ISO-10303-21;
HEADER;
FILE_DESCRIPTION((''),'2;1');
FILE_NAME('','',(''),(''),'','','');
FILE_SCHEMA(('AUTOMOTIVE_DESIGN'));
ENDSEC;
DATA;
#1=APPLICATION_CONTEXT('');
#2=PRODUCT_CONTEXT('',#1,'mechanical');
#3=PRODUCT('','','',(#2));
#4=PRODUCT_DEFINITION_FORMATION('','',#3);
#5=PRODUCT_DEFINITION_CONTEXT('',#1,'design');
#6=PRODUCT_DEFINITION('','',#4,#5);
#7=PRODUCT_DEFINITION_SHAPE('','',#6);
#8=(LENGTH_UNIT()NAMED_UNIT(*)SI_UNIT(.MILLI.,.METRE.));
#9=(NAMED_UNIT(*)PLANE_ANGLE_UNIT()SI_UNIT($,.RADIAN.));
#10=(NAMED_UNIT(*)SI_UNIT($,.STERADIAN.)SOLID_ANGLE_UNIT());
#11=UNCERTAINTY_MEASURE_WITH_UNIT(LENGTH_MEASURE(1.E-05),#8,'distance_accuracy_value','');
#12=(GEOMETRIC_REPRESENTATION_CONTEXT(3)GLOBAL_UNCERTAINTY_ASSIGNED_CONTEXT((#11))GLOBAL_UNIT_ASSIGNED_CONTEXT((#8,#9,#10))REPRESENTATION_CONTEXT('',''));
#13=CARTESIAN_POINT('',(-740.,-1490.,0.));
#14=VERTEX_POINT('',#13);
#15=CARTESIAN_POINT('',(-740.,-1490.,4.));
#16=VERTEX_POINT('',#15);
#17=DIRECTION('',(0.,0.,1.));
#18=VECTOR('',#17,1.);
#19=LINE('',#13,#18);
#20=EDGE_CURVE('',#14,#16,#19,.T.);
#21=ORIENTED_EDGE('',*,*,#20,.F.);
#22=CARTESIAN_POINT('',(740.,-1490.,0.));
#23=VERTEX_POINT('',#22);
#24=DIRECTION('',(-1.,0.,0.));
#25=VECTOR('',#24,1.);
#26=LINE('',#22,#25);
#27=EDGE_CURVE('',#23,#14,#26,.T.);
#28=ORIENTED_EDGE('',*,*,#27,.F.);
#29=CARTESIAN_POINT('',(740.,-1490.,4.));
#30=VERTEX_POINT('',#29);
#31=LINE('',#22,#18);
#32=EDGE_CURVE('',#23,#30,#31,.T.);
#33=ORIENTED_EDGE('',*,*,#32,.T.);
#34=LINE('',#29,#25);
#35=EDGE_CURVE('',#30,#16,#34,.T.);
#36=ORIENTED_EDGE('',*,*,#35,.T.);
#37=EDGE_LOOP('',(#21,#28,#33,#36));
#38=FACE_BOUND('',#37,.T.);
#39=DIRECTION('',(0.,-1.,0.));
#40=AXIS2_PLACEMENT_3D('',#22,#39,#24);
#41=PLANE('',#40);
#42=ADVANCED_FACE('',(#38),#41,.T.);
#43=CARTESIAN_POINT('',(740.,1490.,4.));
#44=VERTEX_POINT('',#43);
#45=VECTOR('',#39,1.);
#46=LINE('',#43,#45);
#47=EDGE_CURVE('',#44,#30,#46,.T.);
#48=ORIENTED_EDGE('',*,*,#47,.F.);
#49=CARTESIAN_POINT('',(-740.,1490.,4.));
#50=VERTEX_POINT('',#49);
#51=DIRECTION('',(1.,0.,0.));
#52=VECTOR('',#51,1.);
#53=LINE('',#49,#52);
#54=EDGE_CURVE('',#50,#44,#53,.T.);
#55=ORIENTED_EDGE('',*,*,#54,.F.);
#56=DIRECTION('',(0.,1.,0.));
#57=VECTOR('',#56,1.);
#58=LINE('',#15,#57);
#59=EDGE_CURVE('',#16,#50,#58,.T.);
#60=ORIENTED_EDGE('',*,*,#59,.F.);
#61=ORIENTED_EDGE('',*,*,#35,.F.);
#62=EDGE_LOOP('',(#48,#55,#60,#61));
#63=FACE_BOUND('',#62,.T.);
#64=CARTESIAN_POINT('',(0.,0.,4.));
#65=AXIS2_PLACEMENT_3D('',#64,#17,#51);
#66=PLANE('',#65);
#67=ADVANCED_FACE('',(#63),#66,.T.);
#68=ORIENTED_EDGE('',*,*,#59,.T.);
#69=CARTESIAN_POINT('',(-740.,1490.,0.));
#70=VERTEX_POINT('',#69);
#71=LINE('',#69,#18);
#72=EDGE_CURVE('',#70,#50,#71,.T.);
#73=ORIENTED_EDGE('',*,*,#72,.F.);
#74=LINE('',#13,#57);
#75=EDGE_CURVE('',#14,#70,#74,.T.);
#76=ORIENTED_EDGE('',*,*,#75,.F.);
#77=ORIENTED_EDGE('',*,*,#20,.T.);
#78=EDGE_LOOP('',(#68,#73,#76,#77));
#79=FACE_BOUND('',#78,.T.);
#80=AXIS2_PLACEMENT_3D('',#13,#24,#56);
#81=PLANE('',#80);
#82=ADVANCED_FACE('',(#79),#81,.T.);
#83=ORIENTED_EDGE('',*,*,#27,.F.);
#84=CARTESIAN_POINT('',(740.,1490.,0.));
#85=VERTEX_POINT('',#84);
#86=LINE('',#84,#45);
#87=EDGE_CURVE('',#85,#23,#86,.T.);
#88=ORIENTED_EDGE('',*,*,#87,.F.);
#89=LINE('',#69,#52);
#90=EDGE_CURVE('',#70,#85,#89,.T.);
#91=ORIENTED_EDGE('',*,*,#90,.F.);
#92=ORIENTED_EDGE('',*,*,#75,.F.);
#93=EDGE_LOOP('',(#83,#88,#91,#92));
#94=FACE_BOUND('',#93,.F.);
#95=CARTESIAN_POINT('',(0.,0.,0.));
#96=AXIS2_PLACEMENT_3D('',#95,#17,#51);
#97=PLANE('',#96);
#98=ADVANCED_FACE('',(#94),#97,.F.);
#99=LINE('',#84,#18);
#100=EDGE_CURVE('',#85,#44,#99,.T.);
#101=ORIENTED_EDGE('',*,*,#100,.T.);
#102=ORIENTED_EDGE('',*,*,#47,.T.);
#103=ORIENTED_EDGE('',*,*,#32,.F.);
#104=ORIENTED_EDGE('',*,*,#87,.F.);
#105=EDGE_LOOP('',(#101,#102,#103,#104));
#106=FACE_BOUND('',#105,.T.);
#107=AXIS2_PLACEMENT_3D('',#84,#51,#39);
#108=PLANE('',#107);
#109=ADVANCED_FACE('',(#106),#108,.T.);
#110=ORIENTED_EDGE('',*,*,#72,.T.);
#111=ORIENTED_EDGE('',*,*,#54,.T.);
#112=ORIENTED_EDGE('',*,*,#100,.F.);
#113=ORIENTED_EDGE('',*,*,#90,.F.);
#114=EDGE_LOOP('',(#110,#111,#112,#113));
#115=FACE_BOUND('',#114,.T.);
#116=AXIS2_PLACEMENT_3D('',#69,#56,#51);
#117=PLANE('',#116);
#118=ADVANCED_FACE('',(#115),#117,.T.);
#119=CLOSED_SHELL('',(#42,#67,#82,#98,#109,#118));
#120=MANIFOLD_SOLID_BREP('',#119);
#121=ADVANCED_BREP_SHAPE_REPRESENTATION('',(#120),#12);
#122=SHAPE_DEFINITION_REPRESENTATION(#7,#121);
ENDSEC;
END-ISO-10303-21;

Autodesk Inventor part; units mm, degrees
ref_plane "YZ Plane" through (0, 0, 0) normal (1, 0, 0) x (0, 1, 0)
ref_plane "XZ Plane" through (0, 0, 0) normal (0, 1, 0) x (-1, 0, 0)
ref_plane "XY Plane" through (0, 0, 0) normal (0, 0, 1) x (1, 0, 0)
sketch "Sketch1" plane through (0, 0, 0) normal (0, 0, 1) x (1, 0, 0)
  line L0 (740, -1490) -> (-740, -1490)
  line L1 (-740, -1490) -> (-740, 1490)
  line L2 (-740, 1490) -> (740, 1490)
  line L3 (740, 1490) -> (740, -1490)
  line L4 (740, -1490) -> (-740, 1490) construction
  line L5 (-740, -1490) -> (740, 1490) construction
  point P0 (0, 0)
  dimension "d0" = 1480
  dimension "d1" = 2980
extrude "Plate1" add sketch "Sketch1" along normal blind 4
sketch "Эскиз2" plane through (0, 0, 4) normal (0, 0, 1) x (1, 0, 0)
  line L0 (567.512, -1329.859) -> (567.512, -1827.9951) construction
  line L1 (567.512, -1827.9951) -> (527.8847, -1827.9951) construction
  line L2 (527.8847, -1827.9951) -> (527.8847, -1329.859) construction
  line L3 (527.8847, -1329.859) -> (567.512, -1329.859) construction
  line L4 (690.2486, -1238) -> (690.2486, -1335) projected
  line L5 (690.2486, -1335) -> (686.2496, -1335) projected
  line L6 (770, 1252.8333) -> (710, 1252.8333) projected
  line L7 (710, 1248.8333) -> (710, 1252.8333) projected
  line L8 (770, 756.1667) -> (710, 756.1667) projected
  line L9 (710, 752.1667) -> (710, 756.1667) projected
  line L10 (770, 259.5) -> (710, 259.5) projected
  line L11 (710, 255.5) -> (710, 259.5) projected
  line L12 (770, -237.1667) -> (710, -237.1667) projected
  line L13 (710, -241.1667) -> (710, -237.1667) projected
  line L14 (770, -733.8333) -> (710, -733.8333) projected
  line L15 (710, -737.8333) -> (710, -733.8333) projected
  line L16 (770, -1230.5) -> (710, -1230.5) projected
  line L17 (710, -1234.5) -> (710, -1230.5) projected
  line L18 (190.12, -1238) -> (190.12, -1335) projected
  line L19 (190.12, -1335) -> (186.121, -1335) projected
  line L20 (-310.0086, -1238) -> (-310.0086, -1335) projected
  line L21 (-310.0086, -1335) -> (-314.0076, -1335) projected
  ellipse E0 centre (690.2486, 1490.5) end of major axis (690.2486, 1520.5) minor radius 0.6803 (690.2486, 1460.5) -> (690.2486, 1520.5) ccw projected
  line L22 (690.2486, 1460.5) -> (686.2496, 1460.5) projected
  ellipse E1 centre (190.12, 1490.5) end of major axis (190.12, 1520.5) minor radius 0.6803 (190.12, 1460.5) -> (190.12, 1520.5) ccw projected
  line L23 (190.12, 1460.5) -> (186.121, 1460.5) projected
  ellipse E2 centre (-310.0086, 1490.5) end of major axis (-310.0086, 1520.5) minor radius 0.6803 (-310.0086, 1460.5) -> (-310.0086, 1520.5) ccw projected
  line L24 (-310.0086, 1460.5) -> (-314.0076, 1460.5) projected
  line L25 (-710, 1252.8333) -> (-739.3197, 1252.8333) projected
  line L26 (-710, 1248.8333) -> (-710, 1252.8333) projected
  line L27 (-710, 756.1667) -> (-739.3197, 756.1667) projected
  line L28 (-710, 752.1667) -> (-710, 756.1667) projected
  line L29 (-710, 259.5) -> (-739.3197, 259.5) projected
  line L30 (-710, 255.5) -> (-710, 259.5) projected
  line L31 (-710, -237.1667) -> (-739.3197, -237.1667) projected
  line L32 (-710, -241.1667) -> (-710, -237.1667) projected
  line L33 (-710, -733.8333) -> (-739.3197, -733.8333) projected
  line L34 (-710, -737.8333) -> (-710, -733.8333) projected
  line L35 (-710, -1230.5) -> (-739.3197, -1230.5) projected
  line L36 (-710, -1234.5) -> (-710, -1230.5) projected
  point P0 (0, 0)
mark "Маркировка1"
equation "\"d0\" = Лист_ширина"
equation "\"d2\" = Thickness"
equation "\"BendRadius\" = Thickness"
equation "\"BendReliefWidth\" = Thickness"
equation "\"BendReliefDepth\" = 0.5 * Thickness"
equation "\"CornerReliefSize\" = 4 * Thickness"
equation "\"MinimumRemnant\" = 2 * Thickness"
equation "\"TransitionRadius\" = BendRadius"
equation "\"JacobiRadiusSize\" = BendRadius"
equation "\"GapSize\" = Thickness"
equation "\"Лист_ширина\" = 1480"
equation "\"Thickness\" = 4"
properties part number "GBK 2221 shield 5" material "Steel"
